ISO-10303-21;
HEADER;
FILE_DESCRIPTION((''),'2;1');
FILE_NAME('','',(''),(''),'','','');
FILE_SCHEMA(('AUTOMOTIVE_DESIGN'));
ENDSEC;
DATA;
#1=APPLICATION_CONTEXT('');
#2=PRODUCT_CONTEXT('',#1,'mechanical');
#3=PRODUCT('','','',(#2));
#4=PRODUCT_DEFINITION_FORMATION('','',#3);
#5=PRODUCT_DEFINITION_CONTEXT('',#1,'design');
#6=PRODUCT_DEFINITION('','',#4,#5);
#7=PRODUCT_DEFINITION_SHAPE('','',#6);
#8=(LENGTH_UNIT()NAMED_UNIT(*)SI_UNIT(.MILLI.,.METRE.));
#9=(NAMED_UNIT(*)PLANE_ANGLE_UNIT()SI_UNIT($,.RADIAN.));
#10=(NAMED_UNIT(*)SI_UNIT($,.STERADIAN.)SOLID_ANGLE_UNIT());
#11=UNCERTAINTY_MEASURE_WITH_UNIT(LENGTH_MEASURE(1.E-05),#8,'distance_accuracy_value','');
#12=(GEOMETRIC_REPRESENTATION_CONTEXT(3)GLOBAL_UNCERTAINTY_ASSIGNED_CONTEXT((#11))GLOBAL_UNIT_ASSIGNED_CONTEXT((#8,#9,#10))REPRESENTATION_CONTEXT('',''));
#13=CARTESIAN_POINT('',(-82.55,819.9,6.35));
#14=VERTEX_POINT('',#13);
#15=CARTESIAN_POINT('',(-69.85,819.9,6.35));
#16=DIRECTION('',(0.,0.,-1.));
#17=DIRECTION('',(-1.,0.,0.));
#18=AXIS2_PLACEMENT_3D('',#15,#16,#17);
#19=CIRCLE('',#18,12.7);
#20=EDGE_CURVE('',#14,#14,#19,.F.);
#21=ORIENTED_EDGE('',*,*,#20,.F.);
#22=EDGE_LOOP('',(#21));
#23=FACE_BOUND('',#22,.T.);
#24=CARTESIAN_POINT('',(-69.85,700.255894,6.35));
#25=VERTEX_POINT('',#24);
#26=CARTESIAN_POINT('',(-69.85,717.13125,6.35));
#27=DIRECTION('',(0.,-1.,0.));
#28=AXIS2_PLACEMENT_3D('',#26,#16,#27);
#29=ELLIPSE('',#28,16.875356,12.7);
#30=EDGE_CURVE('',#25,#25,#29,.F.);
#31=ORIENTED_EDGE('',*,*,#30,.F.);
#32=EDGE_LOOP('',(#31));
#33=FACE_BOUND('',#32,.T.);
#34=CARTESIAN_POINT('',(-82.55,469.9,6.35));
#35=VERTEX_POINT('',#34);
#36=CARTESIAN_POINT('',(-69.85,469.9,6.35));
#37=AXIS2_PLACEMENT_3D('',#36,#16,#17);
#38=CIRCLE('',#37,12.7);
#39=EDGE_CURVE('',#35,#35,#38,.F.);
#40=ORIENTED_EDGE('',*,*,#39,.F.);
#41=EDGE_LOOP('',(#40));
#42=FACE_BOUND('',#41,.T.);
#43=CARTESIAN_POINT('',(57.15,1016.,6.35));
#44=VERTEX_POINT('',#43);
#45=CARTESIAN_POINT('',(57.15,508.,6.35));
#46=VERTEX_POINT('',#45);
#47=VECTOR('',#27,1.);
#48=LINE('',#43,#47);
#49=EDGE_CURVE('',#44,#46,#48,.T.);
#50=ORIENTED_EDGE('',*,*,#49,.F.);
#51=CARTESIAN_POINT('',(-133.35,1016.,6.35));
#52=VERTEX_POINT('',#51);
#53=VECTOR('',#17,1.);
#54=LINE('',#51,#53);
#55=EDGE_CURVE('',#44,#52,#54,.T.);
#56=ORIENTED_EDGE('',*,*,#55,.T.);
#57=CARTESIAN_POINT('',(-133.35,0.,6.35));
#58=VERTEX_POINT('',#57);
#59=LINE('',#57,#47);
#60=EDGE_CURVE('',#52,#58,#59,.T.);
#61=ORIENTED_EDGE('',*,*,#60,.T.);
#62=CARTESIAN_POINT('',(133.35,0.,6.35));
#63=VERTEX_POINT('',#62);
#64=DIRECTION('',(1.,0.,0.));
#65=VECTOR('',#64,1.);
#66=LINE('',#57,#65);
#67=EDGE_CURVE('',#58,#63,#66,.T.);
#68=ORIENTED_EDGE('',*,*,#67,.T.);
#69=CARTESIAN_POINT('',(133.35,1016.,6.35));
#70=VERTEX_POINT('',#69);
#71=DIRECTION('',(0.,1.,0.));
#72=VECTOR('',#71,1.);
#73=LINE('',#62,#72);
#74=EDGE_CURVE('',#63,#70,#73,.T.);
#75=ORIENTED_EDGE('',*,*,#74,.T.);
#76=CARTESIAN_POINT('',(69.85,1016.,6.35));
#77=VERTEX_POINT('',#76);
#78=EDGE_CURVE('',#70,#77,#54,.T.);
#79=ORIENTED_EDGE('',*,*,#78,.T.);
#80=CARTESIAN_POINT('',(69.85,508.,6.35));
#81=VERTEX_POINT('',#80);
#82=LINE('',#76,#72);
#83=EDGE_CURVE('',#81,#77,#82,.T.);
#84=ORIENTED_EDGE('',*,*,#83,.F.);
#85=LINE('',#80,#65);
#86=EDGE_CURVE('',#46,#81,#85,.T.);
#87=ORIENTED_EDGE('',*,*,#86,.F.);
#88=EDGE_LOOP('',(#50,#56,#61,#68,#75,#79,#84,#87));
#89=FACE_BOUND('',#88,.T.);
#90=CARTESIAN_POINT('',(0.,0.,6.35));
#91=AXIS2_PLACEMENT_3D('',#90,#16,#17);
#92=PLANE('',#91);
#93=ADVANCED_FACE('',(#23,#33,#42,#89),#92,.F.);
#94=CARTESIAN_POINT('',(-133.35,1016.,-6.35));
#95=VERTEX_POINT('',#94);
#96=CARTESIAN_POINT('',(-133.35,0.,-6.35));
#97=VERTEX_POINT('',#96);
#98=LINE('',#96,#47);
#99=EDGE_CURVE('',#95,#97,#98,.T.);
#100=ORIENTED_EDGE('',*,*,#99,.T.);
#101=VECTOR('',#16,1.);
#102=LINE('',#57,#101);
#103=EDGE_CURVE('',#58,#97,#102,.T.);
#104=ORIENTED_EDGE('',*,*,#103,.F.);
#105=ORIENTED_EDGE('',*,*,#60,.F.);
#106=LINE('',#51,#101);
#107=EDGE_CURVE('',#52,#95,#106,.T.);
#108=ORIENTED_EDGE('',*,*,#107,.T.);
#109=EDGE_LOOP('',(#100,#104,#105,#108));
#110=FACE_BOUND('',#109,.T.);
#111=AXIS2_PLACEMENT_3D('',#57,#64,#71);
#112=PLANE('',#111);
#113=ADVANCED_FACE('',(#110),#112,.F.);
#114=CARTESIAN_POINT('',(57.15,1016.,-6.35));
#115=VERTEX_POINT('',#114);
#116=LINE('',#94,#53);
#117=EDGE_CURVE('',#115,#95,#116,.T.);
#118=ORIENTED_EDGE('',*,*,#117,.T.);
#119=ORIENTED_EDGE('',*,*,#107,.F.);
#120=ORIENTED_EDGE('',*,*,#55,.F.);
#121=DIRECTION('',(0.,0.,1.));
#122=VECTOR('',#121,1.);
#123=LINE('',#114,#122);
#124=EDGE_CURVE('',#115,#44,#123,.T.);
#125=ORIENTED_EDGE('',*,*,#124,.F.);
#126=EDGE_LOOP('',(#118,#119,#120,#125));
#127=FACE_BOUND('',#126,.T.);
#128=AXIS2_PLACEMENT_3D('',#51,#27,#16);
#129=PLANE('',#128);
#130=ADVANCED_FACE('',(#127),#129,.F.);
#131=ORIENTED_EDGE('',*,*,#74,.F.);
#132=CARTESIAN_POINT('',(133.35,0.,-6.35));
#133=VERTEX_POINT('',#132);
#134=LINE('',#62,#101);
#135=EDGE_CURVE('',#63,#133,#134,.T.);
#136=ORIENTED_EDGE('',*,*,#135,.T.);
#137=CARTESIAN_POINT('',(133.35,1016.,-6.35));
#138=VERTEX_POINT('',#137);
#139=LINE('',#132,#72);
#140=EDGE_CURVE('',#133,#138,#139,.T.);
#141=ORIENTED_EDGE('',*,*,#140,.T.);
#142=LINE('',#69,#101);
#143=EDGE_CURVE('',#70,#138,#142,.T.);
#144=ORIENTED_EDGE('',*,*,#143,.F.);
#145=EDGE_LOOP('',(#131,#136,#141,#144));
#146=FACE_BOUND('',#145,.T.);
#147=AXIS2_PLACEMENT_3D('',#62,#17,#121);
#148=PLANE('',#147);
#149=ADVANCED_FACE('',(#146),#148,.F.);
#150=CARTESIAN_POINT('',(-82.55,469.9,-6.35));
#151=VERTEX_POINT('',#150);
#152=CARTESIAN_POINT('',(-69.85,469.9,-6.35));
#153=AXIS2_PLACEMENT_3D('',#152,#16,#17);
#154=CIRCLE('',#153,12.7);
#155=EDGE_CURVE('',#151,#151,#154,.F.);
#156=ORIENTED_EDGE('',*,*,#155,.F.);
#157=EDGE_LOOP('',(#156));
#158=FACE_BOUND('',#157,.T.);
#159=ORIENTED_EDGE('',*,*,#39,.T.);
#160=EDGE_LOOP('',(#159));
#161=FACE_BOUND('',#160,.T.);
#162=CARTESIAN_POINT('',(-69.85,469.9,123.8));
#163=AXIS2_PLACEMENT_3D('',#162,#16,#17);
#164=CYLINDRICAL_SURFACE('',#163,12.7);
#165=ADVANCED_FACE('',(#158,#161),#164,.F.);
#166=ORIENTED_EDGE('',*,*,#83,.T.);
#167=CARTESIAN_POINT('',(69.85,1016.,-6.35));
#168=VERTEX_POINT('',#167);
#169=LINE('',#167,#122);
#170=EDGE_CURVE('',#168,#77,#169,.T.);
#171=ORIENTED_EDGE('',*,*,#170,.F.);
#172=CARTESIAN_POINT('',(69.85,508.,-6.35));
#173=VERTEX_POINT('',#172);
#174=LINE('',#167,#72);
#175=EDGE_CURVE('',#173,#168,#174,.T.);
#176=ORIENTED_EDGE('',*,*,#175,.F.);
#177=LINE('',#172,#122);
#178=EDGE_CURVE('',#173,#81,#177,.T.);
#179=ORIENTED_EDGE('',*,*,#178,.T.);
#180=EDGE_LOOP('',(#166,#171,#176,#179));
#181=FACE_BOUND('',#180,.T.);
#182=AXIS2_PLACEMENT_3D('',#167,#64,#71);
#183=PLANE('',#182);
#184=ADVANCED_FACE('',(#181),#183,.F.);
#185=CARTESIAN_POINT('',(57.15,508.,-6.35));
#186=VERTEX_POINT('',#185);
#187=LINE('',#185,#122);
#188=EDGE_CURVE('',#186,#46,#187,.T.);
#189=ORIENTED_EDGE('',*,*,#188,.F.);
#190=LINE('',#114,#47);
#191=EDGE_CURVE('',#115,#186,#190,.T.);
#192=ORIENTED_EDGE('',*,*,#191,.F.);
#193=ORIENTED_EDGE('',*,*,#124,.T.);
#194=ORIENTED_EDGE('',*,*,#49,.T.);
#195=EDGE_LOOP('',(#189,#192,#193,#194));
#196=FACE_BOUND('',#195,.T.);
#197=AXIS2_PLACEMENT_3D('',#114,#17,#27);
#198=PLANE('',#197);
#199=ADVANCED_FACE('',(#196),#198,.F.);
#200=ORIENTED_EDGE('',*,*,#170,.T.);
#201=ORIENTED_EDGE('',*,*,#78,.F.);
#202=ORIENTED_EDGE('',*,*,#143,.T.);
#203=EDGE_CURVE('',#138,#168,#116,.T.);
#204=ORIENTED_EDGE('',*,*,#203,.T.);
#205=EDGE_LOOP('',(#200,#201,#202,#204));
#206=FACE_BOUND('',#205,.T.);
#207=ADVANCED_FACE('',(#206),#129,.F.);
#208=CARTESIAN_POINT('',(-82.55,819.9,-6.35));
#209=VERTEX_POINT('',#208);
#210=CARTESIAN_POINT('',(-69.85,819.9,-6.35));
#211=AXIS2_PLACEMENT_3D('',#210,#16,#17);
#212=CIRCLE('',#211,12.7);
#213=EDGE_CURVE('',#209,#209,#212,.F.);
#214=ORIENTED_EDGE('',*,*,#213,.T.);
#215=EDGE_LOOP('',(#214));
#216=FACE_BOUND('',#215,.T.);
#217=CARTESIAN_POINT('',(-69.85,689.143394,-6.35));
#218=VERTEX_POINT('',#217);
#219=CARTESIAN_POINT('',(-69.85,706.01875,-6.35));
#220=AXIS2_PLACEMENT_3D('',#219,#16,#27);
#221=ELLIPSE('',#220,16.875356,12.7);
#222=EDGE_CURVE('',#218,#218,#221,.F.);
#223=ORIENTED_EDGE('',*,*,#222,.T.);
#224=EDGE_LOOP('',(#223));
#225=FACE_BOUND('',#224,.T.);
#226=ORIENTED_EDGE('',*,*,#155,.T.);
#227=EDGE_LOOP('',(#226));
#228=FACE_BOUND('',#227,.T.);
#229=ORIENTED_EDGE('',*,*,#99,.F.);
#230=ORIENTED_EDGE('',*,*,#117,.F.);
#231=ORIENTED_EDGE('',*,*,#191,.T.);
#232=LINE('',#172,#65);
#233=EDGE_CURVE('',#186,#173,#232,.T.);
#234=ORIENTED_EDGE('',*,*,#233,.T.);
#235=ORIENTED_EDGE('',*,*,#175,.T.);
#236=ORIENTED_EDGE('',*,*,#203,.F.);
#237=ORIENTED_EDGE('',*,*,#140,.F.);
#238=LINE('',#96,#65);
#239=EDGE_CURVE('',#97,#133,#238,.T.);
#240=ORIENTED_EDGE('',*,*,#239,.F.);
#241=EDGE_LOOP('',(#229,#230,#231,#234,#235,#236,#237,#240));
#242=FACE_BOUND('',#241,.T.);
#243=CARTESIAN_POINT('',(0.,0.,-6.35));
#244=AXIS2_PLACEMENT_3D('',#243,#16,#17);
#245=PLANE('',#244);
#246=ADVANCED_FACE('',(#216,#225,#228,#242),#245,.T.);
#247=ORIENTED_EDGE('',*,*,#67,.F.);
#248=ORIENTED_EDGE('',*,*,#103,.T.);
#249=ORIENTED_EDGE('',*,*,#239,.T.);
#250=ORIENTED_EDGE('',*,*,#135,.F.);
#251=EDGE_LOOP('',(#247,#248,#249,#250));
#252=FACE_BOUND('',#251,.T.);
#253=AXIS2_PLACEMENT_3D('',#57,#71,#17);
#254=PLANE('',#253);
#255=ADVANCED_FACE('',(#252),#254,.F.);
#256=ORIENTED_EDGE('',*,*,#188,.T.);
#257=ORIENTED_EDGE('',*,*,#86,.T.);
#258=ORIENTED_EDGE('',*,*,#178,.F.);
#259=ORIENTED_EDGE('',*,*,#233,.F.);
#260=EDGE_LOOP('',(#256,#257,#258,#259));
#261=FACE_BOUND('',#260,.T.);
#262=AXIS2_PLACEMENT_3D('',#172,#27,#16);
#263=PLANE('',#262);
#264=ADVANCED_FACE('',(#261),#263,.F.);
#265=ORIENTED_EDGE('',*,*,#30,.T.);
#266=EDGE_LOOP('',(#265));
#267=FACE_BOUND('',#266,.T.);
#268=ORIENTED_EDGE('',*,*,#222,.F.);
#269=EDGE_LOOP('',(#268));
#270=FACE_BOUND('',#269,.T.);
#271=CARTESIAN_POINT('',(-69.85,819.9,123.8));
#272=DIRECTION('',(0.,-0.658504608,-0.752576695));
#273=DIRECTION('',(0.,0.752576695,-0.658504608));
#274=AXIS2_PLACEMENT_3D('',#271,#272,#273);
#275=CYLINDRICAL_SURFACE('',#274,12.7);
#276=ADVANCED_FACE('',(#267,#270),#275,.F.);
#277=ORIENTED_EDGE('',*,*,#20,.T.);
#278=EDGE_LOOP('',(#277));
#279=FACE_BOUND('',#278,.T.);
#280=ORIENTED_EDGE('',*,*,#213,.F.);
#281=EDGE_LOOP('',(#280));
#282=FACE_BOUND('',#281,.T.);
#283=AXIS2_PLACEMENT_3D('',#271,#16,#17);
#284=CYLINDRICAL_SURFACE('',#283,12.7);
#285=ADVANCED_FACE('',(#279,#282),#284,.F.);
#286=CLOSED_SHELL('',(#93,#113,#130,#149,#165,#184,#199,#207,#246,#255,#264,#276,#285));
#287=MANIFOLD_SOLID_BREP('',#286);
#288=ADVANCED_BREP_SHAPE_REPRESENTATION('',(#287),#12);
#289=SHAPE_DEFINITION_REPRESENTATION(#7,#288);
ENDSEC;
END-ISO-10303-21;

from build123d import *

# Parameters (mm, degrees)
SKETCH2_W               = 266.7
SKETCH2_H               = 1016
BOSS_EXTRUDE1_DEPTH     = 6.35
CAVITY1_START           = -6.35
CAVITY1_OUTLINE_R       = 12.7
CAVITY1_DEPTH           = 12.7
CAVITY1_START_2         = 449.025238005
CAVITY1_2_OUTLINE_R     = 12.7
CAVITY1_2_DEPTH         = 39.100356678
CUT_EXTRUDE3_DEPTH      = 1025.733401915
CUT_EXTRUDE3_DEPTH_BACK = 1025.733401915
SKETCH5_W               = 12.7
SKETCH5_H               = 508


# Read off the part's stored shape, not the designer's step: Cavity1
with BuildPart() as part:
    # Sketch2 → Boss-Extrude1 (new, symmetric)
    with BuildSketch(Plane.XY):
        with Locations((0, 508)):
            Rectangle(SKETCH2_W, SKETCH2_H)
    extrude(amount=BOSS_EXTRUDE1_DEPTH, both=True)

    # Cavity1 outline → Cavity1 (cut)
    with BuildSketch(Plane.XY.offset(CAVITY1_START)):
        with Locations((-69.85, 819.9)):
            Circle(CAVITY1_OUTLINE_R)
        with Locations((-69.85, 469.9)):
            Circle(CAVITY1_OUTLINE_R)
    extrude(amount=CAVITY1_DEPTH, mode=Mode.SUBTRACT)

    # Cavity1 2 outline → Cavity1 2 (cut)
    with BuildSketch(Plane(origin=(0, 0, 0), x_dir=(1, 0, 0), z_dir=(0, 0.658504607868519, 0.752576694706877)).offset(CAVITY1_START_2)):
        with Locations((-69.85, 535.514761536)):
            Circle(CAVITY1_2_OUTLINE_R)
    extrude(amount=CAVITY1_2_DEPTH, mode=Mode.SUBTRACT)

    # Sketch5 → Cut-Extrude3 (cut, two sides: drawn at the far end of the back side and taken through both)
    with BuildSketch(Plane.XY.offset(-CUT_EXTRUDE3_DEPTH_BACK)):
        with Locations((63.5, 762)):
            Rectangle(SKETCH5_W, SKETCH5_H)
    extrude(amount=CUT_EXTRUDE3_DEPTH + CUT_EXTRUDE3_DEPTH_BACK, mode=Mode.SUBTRACT)


solid = part.part
